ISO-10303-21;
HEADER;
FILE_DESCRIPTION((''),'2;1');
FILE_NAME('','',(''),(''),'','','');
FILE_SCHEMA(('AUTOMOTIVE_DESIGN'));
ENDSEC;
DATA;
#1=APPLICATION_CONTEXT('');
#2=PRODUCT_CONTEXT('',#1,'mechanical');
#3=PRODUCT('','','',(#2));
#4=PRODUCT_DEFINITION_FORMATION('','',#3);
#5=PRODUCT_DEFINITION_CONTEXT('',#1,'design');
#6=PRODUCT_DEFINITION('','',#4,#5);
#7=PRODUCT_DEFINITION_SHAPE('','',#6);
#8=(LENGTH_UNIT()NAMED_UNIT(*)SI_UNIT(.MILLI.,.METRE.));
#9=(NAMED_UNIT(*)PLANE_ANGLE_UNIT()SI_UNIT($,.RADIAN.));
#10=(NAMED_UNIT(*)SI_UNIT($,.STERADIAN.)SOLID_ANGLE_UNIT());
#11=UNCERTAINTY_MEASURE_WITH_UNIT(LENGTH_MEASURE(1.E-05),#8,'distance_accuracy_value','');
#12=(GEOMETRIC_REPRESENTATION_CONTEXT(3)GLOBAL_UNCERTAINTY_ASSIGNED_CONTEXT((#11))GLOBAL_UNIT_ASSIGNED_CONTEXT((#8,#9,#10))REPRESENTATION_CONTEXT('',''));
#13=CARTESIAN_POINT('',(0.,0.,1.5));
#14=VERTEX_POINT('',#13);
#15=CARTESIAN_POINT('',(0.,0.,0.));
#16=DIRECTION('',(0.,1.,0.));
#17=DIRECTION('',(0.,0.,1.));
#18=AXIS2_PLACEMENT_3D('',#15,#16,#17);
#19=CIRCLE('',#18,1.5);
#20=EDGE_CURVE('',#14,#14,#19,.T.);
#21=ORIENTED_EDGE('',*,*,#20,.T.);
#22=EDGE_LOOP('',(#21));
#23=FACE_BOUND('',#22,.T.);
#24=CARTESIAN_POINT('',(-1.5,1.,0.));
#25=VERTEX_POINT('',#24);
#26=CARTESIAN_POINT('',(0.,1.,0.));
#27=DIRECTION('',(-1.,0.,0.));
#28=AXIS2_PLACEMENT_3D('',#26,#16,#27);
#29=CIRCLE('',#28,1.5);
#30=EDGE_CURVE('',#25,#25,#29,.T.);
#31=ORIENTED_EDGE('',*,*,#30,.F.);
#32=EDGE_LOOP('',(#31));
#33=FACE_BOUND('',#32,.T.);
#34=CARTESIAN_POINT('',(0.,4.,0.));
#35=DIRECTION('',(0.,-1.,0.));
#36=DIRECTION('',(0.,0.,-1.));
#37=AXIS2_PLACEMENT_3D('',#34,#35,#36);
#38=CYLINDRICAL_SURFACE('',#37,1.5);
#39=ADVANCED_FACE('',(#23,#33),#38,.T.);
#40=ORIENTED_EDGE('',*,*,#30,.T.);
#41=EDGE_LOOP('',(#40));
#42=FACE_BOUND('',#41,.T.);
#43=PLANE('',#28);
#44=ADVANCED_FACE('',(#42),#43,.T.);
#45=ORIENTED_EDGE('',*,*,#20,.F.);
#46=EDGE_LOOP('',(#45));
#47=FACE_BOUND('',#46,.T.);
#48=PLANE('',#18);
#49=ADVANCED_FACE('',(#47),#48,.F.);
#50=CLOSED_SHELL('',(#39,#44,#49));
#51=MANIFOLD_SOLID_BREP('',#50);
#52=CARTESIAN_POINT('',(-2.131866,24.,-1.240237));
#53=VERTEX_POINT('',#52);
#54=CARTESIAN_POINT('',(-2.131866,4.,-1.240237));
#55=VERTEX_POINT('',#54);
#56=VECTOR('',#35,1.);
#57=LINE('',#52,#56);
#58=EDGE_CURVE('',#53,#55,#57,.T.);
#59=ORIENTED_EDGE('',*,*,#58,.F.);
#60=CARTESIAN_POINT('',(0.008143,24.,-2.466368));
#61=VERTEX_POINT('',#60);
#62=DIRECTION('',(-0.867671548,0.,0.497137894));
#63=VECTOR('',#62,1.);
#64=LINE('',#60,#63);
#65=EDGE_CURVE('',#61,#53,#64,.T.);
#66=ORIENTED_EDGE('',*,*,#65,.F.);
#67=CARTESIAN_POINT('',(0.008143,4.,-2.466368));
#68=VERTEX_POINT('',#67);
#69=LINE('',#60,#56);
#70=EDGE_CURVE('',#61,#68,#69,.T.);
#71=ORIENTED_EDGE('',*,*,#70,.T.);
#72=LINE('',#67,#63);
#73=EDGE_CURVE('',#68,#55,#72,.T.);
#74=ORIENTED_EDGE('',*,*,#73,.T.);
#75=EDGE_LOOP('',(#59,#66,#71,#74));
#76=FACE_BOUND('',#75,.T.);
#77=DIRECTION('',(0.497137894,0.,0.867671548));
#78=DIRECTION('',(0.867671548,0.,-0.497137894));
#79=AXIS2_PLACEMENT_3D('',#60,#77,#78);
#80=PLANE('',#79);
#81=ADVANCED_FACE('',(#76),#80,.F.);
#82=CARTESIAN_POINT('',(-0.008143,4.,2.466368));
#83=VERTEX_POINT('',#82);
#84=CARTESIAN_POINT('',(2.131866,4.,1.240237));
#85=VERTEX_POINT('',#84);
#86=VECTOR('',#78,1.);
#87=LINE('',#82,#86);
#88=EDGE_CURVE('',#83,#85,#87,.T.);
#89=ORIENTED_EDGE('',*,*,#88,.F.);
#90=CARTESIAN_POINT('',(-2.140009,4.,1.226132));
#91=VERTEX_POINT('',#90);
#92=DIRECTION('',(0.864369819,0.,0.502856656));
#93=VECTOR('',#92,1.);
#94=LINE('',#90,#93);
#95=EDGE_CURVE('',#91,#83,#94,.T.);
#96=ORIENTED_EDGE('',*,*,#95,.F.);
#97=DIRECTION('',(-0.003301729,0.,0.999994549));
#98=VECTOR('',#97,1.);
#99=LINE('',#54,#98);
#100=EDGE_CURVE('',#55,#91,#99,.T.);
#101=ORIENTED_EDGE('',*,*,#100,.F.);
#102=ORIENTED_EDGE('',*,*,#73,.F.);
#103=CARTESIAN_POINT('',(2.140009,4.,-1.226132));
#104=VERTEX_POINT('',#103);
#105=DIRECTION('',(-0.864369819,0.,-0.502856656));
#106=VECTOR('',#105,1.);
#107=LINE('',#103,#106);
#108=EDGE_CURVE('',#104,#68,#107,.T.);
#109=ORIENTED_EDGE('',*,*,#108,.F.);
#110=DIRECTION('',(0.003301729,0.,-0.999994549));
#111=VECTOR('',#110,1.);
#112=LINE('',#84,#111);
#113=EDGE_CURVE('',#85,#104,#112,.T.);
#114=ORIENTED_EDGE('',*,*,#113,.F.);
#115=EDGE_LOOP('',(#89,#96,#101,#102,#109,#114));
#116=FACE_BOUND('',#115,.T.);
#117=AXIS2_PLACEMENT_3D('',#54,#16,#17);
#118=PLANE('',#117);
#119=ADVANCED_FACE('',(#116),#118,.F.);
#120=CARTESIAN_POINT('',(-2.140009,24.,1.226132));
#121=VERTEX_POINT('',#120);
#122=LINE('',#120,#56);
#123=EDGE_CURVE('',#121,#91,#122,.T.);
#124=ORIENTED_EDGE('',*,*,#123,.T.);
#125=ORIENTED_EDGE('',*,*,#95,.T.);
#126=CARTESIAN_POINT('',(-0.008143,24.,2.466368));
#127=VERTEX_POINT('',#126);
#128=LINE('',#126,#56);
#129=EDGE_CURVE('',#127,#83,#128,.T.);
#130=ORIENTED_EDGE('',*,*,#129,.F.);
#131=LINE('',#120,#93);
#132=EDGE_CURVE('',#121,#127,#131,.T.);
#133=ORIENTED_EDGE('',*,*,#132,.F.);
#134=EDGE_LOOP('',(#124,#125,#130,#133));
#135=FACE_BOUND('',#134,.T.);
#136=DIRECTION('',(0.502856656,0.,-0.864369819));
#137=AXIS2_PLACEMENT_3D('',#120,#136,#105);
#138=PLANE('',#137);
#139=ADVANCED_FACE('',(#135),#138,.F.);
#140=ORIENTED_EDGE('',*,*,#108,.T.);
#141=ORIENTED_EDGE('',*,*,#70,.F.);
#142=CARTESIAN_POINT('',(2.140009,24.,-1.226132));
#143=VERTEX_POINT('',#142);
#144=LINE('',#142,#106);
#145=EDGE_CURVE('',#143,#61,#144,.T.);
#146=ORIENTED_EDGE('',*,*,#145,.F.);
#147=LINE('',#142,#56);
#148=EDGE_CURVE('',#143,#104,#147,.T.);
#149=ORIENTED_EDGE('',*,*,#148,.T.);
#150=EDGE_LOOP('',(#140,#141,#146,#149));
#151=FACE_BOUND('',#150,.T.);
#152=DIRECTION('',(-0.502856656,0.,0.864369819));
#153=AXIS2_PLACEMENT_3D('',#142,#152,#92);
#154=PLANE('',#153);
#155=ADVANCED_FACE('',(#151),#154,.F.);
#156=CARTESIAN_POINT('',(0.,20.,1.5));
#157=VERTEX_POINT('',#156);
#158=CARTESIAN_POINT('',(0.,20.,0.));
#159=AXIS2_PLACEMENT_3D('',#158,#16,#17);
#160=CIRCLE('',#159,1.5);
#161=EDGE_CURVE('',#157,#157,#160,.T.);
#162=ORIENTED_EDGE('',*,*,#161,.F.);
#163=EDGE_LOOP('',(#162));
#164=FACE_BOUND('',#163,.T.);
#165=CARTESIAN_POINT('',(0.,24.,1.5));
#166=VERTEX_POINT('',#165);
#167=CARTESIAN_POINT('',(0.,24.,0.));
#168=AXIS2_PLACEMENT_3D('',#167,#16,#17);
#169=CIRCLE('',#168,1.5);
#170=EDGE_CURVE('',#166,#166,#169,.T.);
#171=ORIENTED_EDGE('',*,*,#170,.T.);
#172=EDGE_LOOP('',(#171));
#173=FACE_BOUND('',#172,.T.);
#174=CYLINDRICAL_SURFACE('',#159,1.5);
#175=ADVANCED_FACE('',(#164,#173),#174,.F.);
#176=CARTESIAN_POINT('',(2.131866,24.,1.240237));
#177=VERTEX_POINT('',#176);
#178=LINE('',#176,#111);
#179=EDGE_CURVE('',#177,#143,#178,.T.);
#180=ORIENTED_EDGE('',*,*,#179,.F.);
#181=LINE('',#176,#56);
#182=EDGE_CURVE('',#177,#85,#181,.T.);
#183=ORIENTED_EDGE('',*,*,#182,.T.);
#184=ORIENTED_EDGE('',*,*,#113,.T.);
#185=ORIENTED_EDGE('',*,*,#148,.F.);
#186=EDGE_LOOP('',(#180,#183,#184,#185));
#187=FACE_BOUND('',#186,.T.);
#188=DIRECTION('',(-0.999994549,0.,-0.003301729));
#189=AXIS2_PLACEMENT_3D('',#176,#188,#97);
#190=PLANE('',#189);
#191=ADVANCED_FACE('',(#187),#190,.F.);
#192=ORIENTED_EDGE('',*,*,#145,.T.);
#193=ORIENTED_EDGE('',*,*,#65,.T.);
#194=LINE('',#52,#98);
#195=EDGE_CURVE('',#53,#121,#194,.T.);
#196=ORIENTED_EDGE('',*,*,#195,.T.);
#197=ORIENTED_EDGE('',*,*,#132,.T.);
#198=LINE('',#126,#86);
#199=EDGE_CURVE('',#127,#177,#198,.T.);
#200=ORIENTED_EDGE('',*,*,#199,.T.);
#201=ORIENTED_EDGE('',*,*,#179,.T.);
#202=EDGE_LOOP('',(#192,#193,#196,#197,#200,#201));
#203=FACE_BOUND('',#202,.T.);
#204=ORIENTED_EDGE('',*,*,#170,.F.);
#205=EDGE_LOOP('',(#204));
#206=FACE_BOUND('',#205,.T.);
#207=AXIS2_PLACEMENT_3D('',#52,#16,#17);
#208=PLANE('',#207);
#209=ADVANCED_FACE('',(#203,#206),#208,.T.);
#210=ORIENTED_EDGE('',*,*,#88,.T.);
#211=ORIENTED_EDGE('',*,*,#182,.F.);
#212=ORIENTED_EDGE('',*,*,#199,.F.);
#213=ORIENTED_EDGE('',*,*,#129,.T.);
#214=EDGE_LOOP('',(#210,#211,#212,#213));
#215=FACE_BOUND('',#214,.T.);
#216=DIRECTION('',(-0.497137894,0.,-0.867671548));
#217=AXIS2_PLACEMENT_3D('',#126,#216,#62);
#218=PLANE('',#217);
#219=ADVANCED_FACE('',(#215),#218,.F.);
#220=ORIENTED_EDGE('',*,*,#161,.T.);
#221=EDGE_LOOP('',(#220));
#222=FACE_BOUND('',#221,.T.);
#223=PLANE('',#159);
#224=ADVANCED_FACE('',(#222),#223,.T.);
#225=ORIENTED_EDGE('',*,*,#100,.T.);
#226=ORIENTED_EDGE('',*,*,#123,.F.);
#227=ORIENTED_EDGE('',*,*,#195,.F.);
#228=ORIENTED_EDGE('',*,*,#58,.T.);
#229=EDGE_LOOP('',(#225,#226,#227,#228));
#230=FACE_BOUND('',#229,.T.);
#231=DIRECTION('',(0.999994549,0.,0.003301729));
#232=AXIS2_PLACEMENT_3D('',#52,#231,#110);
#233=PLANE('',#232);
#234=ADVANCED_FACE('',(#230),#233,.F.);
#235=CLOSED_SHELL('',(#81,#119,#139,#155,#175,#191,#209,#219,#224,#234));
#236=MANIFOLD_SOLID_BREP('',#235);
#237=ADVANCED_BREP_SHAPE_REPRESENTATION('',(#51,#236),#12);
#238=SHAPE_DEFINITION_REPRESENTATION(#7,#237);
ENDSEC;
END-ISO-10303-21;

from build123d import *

# Parameters (mm, degrees)
ESQUISSE1_R             = 1.5
BOSS_EXTRU_1_DEPTH      = 4
BOSS_EXTRU_2_DEPTH      = 20
ENL_V_START             = -4
ESQUISSE3_R             = 1.5
ENL_V_MAT_EXTRU_1_DEPTH = 4
PER_AGE1_START          = 1
PER_AGE1_OUTLINE_R      = 1.5
PER_AGE1_DEPTH          = 3


# Read off the part's stored shape, not the designer's step: Perçage1
with BuildPart() as part:
    # Esquisse1 → Boss.-Extru.1 (new body)
    with BuildSketch(Plane(origin=(0, 0, 0), x_dir=(1, 0, 0), z_dir=(0, 1, 0))):
        with Locations(Location((0, 0, 0), (0, 0, 270))):
            Circle(ESQUISSE1_R)
    extrude(amount=BOSS_EXTRU_1_DEPTH)

    # Esquisse2 → Boss.-Extru.2 (add)
    with BuildSketch(Plane(origin=(0, 4, 0), x_dir=(-1, 0, 0), z_dir=(0, 1, 0))):
        Polygon((2.131865991, -1.240236504), (2.140009315, 1.226131853), (0.008143324, 2.466368358), (-2.131865991, 1.240236504), (-2.140009315, -1.226131853), (-0.008143324, -2.466368358), align=None)
    extrude(amount=BOSS_EXTRU_2_DEPTH)

    # Esquisse3 → Enlèv. mat.-Extru.1 (cut)
    with BuildSketch(Plane(origin=(0, 24, 0), x_dir=(-1, 0, 0), z_dir=(0, 1, 0)).offset(ENL_V_START)):
        with Locations(Location((0, 0, 0), (0, 0, 90))):
            Circle(ESQUISSE3_R)
    extrude(amount=ENL_V_MAT_EXTRU_1_DEPTH, mode=Mode.SUBTRACT)

    # Perçage1 outline → Perçage1 (cut)
    with BuildSketch(Plane(origin=(0, 0, 0), x_dir=(1, 0, 0), z_dir=(0, 1, 0)).offset(PER_AGE1_START)):
        Circle(PER_AGE1_OUTLINE_R)
    extrude(amount=PER_AGE1_DEPTH, mode=Mode.SUBTRACT)


solid = part.part
